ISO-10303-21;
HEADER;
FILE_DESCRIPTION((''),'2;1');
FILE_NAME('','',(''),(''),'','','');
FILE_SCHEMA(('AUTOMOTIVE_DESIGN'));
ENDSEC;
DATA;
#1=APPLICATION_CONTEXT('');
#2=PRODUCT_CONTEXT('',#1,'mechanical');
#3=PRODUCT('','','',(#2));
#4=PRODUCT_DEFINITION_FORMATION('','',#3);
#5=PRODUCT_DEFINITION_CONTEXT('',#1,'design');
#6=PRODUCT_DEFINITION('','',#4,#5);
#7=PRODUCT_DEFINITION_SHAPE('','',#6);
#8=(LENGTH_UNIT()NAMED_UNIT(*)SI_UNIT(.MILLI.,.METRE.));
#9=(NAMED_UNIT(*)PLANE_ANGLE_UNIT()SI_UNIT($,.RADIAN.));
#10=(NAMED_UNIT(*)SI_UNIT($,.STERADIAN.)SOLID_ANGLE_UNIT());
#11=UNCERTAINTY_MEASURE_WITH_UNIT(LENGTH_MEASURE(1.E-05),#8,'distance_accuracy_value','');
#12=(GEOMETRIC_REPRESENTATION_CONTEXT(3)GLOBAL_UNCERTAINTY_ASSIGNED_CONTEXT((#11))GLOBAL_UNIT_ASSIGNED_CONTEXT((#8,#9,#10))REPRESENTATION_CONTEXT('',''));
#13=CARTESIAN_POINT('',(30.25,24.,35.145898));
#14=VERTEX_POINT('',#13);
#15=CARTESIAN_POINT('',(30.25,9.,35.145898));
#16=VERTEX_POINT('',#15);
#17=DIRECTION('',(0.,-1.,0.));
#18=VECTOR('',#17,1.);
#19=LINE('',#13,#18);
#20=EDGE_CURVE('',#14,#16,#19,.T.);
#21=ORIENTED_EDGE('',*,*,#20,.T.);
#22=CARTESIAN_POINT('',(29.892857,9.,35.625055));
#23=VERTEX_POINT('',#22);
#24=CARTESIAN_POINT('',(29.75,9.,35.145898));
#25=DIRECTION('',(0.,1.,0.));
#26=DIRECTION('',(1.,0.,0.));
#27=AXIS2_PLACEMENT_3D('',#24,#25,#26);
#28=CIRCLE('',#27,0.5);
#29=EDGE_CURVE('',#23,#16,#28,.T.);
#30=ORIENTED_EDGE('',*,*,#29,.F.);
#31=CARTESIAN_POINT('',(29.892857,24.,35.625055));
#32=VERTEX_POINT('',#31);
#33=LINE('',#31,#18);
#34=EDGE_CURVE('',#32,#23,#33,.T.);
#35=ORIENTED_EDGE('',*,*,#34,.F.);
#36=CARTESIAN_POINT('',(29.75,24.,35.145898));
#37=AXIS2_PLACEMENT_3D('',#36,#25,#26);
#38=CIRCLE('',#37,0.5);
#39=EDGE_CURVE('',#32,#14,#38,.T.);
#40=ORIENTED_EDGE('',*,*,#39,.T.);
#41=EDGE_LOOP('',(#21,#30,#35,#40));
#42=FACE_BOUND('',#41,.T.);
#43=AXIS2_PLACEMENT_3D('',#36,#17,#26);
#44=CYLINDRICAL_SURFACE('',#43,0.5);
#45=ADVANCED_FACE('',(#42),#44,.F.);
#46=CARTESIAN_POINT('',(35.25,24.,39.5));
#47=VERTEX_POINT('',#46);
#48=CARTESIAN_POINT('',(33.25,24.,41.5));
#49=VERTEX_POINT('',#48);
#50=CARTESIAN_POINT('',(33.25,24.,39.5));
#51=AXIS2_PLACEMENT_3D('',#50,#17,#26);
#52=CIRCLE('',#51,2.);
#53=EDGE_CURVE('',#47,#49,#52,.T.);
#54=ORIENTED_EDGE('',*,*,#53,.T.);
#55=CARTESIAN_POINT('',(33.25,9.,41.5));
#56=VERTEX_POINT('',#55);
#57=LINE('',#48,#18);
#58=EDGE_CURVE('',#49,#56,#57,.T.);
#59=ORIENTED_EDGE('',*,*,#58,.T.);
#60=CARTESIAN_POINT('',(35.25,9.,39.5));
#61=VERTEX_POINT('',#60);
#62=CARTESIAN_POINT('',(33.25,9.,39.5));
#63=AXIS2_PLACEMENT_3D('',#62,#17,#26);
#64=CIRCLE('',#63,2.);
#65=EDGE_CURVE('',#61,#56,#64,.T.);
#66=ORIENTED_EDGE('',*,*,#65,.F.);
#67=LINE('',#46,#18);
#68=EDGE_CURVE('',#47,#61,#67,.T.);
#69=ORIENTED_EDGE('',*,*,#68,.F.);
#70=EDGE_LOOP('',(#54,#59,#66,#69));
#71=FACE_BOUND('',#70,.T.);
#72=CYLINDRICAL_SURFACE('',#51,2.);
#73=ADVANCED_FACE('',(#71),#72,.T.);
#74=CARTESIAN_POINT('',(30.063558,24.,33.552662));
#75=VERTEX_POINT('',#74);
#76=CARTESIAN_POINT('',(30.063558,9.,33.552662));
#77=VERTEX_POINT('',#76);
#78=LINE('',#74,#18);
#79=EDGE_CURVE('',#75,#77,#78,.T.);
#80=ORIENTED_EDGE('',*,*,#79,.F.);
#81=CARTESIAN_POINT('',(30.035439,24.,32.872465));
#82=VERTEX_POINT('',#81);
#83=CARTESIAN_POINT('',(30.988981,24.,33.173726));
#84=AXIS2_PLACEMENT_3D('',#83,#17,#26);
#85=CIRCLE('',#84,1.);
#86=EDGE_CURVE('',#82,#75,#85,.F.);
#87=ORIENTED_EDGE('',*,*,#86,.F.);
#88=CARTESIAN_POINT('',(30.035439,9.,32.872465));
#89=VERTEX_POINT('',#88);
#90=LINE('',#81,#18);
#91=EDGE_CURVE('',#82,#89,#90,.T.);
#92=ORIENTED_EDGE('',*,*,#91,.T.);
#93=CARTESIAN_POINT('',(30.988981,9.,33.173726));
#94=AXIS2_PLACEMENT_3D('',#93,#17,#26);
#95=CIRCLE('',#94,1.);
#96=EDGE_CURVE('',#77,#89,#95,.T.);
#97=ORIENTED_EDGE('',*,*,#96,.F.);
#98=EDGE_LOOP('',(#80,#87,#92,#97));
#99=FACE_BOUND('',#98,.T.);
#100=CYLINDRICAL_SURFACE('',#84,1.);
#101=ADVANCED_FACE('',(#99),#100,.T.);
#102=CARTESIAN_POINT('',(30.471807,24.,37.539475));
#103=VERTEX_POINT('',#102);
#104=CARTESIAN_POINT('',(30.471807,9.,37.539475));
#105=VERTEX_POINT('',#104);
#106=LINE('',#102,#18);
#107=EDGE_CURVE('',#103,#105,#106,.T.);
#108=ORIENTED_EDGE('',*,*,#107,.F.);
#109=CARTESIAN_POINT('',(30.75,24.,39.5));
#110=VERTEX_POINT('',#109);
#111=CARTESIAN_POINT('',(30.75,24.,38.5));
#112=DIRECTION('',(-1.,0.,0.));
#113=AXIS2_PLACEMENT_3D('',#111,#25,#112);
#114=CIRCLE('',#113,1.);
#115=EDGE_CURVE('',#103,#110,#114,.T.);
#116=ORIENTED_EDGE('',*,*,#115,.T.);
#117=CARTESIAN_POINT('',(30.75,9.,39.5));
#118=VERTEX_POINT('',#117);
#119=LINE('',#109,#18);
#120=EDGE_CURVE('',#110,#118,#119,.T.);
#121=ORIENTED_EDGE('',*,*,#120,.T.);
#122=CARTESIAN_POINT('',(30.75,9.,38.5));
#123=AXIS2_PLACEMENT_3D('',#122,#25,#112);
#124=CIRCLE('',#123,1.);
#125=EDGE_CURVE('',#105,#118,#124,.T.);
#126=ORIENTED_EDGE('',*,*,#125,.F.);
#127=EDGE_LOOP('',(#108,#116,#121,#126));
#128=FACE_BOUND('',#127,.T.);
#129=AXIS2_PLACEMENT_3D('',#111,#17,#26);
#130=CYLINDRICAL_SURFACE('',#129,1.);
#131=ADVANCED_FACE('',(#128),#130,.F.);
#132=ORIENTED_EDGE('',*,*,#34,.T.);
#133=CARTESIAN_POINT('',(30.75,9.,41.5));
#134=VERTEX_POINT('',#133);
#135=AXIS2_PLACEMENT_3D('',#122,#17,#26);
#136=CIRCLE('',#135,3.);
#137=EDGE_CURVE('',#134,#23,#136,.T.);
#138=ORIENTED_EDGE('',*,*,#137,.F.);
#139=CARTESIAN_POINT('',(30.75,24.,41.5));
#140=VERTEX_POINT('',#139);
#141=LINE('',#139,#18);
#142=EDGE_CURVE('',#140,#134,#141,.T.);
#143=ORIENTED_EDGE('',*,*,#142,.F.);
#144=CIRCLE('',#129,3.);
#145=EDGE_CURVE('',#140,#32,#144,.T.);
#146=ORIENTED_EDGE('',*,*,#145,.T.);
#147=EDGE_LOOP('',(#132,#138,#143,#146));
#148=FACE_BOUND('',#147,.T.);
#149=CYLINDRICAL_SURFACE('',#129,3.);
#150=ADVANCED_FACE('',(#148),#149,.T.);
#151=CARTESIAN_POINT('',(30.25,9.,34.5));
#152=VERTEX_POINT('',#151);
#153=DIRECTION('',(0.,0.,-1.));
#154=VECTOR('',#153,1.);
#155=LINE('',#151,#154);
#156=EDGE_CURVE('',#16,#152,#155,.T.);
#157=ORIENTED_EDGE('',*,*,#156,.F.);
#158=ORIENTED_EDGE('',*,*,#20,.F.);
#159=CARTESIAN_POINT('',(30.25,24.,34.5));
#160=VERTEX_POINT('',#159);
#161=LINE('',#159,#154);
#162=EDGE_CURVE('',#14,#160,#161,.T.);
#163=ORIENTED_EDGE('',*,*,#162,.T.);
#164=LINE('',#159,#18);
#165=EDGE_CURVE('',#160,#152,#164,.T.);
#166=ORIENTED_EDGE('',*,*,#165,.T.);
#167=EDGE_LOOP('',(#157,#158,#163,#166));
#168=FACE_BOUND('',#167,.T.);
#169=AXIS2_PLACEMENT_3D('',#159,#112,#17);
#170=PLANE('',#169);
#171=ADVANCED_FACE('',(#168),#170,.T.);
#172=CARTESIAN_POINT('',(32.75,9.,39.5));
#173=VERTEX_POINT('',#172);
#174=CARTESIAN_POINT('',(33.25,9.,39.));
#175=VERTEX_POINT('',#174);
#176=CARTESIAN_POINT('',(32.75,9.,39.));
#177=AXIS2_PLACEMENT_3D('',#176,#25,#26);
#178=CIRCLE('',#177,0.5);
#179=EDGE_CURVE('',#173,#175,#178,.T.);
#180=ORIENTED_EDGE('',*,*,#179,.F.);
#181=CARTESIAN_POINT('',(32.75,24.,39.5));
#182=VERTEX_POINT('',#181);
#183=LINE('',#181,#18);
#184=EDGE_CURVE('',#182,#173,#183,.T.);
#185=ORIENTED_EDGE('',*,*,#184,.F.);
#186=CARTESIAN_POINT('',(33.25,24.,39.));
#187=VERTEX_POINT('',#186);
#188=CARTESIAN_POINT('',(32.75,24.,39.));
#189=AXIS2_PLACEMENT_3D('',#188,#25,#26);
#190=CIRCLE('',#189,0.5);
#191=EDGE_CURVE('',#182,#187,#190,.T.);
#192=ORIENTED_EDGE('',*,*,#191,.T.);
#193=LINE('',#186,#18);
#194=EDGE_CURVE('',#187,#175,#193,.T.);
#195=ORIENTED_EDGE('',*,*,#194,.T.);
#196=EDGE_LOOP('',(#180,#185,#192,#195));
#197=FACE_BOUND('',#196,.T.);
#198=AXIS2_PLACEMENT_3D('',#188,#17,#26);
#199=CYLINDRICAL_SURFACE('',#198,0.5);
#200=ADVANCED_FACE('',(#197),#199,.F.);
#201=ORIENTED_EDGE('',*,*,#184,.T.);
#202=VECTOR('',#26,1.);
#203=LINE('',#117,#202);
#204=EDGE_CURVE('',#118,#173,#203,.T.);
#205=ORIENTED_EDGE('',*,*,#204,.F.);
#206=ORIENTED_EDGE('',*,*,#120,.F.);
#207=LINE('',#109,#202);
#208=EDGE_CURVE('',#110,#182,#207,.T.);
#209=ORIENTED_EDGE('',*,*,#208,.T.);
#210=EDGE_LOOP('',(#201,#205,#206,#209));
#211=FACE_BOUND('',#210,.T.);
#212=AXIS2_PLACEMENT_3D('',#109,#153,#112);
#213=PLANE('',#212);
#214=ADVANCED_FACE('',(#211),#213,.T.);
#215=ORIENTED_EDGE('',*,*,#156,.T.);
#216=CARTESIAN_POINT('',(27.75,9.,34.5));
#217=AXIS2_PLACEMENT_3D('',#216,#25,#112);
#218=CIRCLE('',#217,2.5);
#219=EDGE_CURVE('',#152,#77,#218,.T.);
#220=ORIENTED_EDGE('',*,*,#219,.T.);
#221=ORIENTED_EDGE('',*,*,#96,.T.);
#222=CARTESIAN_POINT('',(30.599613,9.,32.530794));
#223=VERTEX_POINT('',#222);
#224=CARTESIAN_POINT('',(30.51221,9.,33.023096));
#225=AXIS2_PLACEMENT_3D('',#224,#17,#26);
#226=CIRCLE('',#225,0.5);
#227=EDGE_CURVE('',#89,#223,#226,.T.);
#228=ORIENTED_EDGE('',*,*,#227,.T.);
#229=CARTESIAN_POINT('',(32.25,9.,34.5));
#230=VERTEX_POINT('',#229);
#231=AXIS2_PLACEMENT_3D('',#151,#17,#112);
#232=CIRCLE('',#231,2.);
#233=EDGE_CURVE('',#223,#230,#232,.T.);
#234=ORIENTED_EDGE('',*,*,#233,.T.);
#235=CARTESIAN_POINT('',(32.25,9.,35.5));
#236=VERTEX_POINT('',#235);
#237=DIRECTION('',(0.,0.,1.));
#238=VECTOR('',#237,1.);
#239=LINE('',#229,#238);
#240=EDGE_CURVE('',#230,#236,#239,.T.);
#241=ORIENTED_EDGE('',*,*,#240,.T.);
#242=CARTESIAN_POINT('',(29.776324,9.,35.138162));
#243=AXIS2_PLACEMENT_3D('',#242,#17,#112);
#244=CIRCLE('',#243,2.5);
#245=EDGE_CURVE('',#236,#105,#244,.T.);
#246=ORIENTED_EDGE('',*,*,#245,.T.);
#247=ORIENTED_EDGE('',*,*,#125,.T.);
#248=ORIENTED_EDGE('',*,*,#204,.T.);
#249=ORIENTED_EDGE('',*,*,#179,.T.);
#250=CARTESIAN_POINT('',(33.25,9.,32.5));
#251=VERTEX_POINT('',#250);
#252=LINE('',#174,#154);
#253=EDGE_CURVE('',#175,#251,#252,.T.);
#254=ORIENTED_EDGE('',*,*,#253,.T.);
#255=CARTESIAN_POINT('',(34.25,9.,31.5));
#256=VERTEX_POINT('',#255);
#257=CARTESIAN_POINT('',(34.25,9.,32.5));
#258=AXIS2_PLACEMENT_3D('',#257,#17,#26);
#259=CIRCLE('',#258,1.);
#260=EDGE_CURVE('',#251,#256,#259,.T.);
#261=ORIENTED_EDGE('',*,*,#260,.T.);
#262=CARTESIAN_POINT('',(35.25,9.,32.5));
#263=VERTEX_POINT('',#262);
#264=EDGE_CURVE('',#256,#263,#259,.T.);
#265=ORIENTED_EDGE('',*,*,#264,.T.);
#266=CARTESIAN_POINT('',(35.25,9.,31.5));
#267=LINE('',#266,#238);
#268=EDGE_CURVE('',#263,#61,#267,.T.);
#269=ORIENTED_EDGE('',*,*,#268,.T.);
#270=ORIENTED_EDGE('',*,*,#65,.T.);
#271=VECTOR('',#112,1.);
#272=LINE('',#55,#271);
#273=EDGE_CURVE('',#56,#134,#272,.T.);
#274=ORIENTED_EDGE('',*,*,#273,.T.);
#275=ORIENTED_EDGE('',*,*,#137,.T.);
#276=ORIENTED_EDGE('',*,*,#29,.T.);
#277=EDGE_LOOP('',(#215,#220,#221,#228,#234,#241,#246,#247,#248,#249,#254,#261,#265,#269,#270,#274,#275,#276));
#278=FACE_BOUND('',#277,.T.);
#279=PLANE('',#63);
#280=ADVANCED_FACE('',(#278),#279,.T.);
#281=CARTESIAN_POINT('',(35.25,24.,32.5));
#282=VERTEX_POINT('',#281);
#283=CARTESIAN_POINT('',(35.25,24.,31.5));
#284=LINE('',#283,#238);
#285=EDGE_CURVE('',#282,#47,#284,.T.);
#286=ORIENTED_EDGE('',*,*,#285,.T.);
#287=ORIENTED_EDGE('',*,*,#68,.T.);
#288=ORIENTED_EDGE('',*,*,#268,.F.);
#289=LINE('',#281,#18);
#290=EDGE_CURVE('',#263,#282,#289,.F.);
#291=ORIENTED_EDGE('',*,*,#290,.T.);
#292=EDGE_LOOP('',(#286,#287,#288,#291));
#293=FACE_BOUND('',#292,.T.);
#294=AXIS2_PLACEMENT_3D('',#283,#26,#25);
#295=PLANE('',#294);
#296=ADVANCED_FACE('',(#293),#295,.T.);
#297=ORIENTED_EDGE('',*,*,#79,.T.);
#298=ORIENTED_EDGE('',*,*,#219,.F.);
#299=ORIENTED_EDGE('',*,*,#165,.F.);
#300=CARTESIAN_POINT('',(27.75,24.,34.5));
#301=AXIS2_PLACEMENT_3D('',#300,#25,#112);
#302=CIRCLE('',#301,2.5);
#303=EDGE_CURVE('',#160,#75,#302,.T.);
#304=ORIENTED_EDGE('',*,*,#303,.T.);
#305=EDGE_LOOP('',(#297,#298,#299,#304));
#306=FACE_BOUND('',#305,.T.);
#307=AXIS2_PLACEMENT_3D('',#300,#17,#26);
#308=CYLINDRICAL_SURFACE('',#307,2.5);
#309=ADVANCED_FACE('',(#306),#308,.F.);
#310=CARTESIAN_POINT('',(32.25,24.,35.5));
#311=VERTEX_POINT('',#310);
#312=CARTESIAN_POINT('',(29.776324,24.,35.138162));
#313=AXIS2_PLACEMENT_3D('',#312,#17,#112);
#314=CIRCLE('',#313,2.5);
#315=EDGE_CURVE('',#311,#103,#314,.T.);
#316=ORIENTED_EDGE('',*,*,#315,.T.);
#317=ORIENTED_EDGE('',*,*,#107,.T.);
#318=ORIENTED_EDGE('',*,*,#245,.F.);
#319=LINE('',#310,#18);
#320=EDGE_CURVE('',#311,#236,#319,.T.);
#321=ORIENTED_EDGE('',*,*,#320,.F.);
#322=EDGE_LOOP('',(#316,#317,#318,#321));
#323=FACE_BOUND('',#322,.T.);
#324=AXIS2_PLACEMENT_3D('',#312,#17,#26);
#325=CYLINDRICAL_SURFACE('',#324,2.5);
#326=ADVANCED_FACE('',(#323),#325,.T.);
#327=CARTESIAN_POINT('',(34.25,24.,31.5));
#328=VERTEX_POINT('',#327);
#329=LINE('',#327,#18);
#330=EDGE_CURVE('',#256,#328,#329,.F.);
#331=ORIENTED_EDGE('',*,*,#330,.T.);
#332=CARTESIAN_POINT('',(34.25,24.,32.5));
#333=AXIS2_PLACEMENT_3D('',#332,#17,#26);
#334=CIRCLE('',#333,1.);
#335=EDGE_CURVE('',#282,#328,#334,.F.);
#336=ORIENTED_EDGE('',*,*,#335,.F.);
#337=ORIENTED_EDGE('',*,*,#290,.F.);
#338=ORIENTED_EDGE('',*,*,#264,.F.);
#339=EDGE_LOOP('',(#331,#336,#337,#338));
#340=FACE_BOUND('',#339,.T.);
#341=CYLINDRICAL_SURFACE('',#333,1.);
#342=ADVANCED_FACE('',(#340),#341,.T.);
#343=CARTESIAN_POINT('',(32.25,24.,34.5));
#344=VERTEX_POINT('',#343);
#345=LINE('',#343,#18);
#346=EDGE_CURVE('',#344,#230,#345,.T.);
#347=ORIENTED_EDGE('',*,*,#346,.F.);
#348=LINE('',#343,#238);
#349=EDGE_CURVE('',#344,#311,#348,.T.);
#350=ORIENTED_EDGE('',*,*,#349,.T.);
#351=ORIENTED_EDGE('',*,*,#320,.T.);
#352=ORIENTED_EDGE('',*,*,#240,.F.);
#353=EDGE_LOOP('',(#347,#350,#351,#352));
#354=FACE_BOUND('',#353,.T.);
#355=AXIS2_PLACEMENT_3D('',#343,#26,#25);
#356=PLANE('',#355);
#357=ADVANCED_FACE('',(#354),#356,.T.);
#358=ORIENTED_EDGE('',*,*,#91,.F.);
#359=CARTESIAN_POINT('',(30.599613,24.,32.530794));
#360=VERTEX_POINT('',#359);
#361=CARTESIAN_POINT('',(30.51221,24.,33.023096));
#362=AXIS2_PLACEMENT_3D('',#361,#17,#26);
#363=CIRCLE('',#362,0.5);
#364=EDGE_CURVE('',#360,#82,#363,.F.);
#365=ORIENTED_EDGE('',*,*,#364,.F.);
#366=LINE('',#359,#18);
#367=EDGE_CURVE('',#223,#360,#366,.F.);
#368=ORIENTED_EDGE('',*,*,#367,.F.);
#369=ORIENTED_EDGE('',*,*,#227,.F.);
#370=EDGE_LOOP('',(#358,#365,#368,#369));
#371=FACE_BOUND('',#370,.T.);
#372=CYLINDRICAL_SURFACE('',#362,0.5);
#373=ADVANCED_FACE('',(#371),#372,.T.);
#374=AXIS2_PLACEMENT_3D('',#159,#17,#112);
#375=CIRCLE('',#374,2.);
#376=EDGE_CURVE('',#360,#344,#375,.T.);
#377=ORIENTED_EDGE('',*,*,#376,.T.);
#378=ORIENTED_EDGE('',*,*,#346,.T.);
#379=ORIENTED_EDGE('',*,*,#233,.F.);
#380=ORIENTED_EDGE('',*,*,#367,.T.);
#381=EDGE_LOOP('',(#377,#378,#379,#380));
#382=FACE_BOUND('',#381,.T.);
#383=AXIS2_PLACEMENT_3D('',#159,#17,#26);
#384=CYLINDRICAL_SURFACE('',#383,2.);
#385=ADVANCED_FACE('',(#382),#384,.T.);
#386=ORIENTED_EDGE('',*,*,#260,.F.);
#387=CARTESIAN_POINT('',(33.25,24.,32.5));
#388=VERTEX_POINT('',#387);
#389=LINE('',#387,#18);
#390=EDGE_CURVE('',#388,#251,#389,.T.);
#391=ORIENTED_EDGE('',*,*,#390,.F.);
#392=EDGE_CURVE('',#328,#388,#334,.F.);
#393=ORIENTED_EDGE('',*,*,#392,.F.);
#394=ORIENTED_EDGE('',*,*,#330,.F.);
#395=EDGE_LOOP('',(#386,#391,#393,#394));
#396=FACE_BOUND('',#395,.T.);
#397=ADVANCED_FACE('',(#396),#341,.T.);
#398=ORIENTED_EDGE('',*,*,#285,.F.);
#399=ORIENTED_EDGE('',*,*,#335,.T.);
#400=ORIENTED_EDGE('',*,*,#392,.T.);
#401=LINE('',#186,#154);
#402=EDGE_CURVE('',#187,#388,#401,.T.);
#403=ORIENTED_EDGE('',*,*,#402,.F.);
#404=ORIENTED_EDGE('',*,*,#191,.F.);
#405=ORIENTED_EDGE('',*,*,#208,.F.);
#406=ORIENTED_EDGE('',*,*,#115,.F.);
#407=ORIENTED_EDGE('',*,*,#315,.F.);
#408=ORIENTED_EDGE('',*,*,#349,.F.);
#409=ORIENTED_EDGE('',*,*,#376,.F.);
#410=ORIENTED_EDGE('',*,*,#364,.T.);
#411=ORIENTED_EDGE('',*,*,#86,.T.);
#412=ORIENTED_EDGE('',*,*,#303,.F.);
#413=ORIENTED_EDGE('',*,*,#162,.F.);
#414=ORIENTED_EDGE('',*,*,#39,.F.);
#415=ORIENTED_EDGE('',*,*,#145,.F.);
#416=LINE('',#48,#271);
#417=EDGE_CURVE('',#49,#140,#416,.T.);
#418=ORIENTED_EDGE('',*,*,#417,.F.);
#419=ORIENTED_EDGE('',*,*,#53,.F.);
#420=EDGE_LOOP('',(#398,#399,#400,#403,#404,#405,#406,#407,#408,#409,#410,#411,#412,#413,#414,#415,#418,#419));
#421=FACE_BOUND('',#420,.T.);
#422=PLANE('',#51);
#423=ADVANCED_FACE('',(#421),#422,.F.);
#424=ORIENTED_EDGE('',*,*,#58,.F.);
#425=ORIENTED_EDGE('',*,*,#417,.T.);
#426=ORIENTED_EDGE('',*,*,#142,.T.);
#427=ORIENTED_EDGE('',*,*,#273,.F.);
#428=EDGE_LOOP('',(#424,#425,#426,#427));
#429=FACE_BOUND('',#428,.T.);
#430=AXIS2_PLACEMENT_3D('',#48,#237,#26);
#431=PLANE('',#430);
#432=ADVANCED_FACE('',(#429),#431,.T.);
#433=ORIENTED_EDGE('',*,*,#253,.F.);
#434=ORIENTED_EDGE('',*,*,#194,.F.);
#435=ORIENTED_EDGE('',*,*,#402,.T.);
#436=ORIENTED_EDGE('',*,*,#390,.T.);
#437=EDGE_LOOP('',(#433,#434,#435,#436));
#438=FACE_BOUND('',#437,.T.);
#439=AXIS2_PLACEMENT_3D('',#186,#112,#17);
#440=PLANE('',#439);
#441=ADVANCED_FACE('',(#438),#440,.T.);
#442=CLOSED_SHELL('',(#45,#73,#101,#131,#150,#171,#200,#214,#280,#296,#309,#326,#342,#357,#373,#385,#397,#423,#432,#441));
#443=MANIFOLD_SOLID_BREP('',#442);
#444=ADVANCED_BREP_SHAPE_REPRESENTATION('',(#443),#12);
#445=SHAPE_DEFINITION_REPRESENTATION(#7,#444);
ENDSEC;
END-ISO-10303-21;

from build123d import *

# Parameters (mm, degrees)
BOSS_EXTRUDE1_DEPTH      = 7.5
BOSS_EXTRUDE1_DEPTH_BACK = 7.5
FILLET3_R                = 1
FILLET4_R                = 1
FILLET5_R                = 0.5


# Some blends are built 0.0001 mm under size
with BuildPart() as part:
    # Sketch1 → Boss-Extrude1 (new, two sides: drawn at the far end of the back side and taken through both)
    with BuildSketch(Plane.XZ.offset(-16.5).offset(-BOSS_EXTRUDE1_DEPTH_BACK)):
        with BuildLine():
            Line((32.25, 34.5), (32.25, 35.5))
            ThreePointArc((32.25, 35.5), (31.660669064, 36.78109942), (30.471806841, 37.539474849))
            ThreePointArc((30.471806841, 37.539474849), (29.759917895, 38.640489944), (30.75, 39.5))
            Line((30.75, 39.5), (32.75, 39.5))
            ThreePointArc((32.75, 39.5), (33.103553391, 39.353553391), (33.25, 39))
            Line((33.25, 39), (33.25, 31.5))
            Line((33.25, 31.5), (35.25, 31.5))
            Line((35.25, 31.5), (35.25, 39.5))
            ThreePointArc((35.25, 39.5), (34.664213562, 40.914213562), (33.25, 41.5))
            Line((33.25, 41.5), (30.75, 41.5))
            ThreePointArc((30.75, 41.5), (27.781428489, 38.933108746), (29.892857143, 35.625055458))
            ThreePointArc((29.892857143, 35.625055458), (30.150891863, 35.444705186), (30.25, 35.145898034))
            Line((30.25, 35.145898034), (30.25, 34.5))
            ThreePointArc((30.25, 34.5), (29.986067977, 33.381966011), (29.25, 32.5))
            Line((29.25, 32.5), (30.25, 32.5))
            ThreePointArc((30.25, 32.5), (31.664213562, 33.085786438), (32.25, 34.5))
        make_face()
    extrude(amount=BOSS_EXTRUDE1_DEPTH + BOSS_EXTRUDE1_DEPTH_BACK)

    # Fillet3
    # the kernel refuses this fillet: 1 mm, written as the material it takes off along each edge
    with BuildSketch(Plane(origin=(29.25, 5.673991819, 32.5), x_dir=(1, 0, 0), z_dir=(0, 1, 0))) as fillet3_piece_1:
        with BuildLine():
            CenterArc((1.738981007, -0.673726259), FILLET3_R, 137.644685186, 64.623066475)
            ThreePointArc((0.813557862, -1.052661613), (0.478087463, -0.471219443), (0, 0))
            Line((0, 0), (1, 0))
        make_face()
    extrude(amount=21.652016361, mode=Mode.SUBTRACT)

    # Fillet4
    fillet4_edges = [part.edges().sort_by_distance(p)[0] for p in [
        (35.25, 16.5, 31.5),
        (33.25, 16.5, 31.5),
    ]]
    fillet(fillet4_edges, radius=FILLET4_R - 0.0001)  # a hair under: the kernel refuses the full size

    # Fillet5
    fillet5_edges = [part.edges().sort_by_distance(p)[0] for p in [
        (30.25, 16.5, 32.5),
    ]]
    fillet(fillet5_edges, radius=FILLET5_R)


solid = part.part
